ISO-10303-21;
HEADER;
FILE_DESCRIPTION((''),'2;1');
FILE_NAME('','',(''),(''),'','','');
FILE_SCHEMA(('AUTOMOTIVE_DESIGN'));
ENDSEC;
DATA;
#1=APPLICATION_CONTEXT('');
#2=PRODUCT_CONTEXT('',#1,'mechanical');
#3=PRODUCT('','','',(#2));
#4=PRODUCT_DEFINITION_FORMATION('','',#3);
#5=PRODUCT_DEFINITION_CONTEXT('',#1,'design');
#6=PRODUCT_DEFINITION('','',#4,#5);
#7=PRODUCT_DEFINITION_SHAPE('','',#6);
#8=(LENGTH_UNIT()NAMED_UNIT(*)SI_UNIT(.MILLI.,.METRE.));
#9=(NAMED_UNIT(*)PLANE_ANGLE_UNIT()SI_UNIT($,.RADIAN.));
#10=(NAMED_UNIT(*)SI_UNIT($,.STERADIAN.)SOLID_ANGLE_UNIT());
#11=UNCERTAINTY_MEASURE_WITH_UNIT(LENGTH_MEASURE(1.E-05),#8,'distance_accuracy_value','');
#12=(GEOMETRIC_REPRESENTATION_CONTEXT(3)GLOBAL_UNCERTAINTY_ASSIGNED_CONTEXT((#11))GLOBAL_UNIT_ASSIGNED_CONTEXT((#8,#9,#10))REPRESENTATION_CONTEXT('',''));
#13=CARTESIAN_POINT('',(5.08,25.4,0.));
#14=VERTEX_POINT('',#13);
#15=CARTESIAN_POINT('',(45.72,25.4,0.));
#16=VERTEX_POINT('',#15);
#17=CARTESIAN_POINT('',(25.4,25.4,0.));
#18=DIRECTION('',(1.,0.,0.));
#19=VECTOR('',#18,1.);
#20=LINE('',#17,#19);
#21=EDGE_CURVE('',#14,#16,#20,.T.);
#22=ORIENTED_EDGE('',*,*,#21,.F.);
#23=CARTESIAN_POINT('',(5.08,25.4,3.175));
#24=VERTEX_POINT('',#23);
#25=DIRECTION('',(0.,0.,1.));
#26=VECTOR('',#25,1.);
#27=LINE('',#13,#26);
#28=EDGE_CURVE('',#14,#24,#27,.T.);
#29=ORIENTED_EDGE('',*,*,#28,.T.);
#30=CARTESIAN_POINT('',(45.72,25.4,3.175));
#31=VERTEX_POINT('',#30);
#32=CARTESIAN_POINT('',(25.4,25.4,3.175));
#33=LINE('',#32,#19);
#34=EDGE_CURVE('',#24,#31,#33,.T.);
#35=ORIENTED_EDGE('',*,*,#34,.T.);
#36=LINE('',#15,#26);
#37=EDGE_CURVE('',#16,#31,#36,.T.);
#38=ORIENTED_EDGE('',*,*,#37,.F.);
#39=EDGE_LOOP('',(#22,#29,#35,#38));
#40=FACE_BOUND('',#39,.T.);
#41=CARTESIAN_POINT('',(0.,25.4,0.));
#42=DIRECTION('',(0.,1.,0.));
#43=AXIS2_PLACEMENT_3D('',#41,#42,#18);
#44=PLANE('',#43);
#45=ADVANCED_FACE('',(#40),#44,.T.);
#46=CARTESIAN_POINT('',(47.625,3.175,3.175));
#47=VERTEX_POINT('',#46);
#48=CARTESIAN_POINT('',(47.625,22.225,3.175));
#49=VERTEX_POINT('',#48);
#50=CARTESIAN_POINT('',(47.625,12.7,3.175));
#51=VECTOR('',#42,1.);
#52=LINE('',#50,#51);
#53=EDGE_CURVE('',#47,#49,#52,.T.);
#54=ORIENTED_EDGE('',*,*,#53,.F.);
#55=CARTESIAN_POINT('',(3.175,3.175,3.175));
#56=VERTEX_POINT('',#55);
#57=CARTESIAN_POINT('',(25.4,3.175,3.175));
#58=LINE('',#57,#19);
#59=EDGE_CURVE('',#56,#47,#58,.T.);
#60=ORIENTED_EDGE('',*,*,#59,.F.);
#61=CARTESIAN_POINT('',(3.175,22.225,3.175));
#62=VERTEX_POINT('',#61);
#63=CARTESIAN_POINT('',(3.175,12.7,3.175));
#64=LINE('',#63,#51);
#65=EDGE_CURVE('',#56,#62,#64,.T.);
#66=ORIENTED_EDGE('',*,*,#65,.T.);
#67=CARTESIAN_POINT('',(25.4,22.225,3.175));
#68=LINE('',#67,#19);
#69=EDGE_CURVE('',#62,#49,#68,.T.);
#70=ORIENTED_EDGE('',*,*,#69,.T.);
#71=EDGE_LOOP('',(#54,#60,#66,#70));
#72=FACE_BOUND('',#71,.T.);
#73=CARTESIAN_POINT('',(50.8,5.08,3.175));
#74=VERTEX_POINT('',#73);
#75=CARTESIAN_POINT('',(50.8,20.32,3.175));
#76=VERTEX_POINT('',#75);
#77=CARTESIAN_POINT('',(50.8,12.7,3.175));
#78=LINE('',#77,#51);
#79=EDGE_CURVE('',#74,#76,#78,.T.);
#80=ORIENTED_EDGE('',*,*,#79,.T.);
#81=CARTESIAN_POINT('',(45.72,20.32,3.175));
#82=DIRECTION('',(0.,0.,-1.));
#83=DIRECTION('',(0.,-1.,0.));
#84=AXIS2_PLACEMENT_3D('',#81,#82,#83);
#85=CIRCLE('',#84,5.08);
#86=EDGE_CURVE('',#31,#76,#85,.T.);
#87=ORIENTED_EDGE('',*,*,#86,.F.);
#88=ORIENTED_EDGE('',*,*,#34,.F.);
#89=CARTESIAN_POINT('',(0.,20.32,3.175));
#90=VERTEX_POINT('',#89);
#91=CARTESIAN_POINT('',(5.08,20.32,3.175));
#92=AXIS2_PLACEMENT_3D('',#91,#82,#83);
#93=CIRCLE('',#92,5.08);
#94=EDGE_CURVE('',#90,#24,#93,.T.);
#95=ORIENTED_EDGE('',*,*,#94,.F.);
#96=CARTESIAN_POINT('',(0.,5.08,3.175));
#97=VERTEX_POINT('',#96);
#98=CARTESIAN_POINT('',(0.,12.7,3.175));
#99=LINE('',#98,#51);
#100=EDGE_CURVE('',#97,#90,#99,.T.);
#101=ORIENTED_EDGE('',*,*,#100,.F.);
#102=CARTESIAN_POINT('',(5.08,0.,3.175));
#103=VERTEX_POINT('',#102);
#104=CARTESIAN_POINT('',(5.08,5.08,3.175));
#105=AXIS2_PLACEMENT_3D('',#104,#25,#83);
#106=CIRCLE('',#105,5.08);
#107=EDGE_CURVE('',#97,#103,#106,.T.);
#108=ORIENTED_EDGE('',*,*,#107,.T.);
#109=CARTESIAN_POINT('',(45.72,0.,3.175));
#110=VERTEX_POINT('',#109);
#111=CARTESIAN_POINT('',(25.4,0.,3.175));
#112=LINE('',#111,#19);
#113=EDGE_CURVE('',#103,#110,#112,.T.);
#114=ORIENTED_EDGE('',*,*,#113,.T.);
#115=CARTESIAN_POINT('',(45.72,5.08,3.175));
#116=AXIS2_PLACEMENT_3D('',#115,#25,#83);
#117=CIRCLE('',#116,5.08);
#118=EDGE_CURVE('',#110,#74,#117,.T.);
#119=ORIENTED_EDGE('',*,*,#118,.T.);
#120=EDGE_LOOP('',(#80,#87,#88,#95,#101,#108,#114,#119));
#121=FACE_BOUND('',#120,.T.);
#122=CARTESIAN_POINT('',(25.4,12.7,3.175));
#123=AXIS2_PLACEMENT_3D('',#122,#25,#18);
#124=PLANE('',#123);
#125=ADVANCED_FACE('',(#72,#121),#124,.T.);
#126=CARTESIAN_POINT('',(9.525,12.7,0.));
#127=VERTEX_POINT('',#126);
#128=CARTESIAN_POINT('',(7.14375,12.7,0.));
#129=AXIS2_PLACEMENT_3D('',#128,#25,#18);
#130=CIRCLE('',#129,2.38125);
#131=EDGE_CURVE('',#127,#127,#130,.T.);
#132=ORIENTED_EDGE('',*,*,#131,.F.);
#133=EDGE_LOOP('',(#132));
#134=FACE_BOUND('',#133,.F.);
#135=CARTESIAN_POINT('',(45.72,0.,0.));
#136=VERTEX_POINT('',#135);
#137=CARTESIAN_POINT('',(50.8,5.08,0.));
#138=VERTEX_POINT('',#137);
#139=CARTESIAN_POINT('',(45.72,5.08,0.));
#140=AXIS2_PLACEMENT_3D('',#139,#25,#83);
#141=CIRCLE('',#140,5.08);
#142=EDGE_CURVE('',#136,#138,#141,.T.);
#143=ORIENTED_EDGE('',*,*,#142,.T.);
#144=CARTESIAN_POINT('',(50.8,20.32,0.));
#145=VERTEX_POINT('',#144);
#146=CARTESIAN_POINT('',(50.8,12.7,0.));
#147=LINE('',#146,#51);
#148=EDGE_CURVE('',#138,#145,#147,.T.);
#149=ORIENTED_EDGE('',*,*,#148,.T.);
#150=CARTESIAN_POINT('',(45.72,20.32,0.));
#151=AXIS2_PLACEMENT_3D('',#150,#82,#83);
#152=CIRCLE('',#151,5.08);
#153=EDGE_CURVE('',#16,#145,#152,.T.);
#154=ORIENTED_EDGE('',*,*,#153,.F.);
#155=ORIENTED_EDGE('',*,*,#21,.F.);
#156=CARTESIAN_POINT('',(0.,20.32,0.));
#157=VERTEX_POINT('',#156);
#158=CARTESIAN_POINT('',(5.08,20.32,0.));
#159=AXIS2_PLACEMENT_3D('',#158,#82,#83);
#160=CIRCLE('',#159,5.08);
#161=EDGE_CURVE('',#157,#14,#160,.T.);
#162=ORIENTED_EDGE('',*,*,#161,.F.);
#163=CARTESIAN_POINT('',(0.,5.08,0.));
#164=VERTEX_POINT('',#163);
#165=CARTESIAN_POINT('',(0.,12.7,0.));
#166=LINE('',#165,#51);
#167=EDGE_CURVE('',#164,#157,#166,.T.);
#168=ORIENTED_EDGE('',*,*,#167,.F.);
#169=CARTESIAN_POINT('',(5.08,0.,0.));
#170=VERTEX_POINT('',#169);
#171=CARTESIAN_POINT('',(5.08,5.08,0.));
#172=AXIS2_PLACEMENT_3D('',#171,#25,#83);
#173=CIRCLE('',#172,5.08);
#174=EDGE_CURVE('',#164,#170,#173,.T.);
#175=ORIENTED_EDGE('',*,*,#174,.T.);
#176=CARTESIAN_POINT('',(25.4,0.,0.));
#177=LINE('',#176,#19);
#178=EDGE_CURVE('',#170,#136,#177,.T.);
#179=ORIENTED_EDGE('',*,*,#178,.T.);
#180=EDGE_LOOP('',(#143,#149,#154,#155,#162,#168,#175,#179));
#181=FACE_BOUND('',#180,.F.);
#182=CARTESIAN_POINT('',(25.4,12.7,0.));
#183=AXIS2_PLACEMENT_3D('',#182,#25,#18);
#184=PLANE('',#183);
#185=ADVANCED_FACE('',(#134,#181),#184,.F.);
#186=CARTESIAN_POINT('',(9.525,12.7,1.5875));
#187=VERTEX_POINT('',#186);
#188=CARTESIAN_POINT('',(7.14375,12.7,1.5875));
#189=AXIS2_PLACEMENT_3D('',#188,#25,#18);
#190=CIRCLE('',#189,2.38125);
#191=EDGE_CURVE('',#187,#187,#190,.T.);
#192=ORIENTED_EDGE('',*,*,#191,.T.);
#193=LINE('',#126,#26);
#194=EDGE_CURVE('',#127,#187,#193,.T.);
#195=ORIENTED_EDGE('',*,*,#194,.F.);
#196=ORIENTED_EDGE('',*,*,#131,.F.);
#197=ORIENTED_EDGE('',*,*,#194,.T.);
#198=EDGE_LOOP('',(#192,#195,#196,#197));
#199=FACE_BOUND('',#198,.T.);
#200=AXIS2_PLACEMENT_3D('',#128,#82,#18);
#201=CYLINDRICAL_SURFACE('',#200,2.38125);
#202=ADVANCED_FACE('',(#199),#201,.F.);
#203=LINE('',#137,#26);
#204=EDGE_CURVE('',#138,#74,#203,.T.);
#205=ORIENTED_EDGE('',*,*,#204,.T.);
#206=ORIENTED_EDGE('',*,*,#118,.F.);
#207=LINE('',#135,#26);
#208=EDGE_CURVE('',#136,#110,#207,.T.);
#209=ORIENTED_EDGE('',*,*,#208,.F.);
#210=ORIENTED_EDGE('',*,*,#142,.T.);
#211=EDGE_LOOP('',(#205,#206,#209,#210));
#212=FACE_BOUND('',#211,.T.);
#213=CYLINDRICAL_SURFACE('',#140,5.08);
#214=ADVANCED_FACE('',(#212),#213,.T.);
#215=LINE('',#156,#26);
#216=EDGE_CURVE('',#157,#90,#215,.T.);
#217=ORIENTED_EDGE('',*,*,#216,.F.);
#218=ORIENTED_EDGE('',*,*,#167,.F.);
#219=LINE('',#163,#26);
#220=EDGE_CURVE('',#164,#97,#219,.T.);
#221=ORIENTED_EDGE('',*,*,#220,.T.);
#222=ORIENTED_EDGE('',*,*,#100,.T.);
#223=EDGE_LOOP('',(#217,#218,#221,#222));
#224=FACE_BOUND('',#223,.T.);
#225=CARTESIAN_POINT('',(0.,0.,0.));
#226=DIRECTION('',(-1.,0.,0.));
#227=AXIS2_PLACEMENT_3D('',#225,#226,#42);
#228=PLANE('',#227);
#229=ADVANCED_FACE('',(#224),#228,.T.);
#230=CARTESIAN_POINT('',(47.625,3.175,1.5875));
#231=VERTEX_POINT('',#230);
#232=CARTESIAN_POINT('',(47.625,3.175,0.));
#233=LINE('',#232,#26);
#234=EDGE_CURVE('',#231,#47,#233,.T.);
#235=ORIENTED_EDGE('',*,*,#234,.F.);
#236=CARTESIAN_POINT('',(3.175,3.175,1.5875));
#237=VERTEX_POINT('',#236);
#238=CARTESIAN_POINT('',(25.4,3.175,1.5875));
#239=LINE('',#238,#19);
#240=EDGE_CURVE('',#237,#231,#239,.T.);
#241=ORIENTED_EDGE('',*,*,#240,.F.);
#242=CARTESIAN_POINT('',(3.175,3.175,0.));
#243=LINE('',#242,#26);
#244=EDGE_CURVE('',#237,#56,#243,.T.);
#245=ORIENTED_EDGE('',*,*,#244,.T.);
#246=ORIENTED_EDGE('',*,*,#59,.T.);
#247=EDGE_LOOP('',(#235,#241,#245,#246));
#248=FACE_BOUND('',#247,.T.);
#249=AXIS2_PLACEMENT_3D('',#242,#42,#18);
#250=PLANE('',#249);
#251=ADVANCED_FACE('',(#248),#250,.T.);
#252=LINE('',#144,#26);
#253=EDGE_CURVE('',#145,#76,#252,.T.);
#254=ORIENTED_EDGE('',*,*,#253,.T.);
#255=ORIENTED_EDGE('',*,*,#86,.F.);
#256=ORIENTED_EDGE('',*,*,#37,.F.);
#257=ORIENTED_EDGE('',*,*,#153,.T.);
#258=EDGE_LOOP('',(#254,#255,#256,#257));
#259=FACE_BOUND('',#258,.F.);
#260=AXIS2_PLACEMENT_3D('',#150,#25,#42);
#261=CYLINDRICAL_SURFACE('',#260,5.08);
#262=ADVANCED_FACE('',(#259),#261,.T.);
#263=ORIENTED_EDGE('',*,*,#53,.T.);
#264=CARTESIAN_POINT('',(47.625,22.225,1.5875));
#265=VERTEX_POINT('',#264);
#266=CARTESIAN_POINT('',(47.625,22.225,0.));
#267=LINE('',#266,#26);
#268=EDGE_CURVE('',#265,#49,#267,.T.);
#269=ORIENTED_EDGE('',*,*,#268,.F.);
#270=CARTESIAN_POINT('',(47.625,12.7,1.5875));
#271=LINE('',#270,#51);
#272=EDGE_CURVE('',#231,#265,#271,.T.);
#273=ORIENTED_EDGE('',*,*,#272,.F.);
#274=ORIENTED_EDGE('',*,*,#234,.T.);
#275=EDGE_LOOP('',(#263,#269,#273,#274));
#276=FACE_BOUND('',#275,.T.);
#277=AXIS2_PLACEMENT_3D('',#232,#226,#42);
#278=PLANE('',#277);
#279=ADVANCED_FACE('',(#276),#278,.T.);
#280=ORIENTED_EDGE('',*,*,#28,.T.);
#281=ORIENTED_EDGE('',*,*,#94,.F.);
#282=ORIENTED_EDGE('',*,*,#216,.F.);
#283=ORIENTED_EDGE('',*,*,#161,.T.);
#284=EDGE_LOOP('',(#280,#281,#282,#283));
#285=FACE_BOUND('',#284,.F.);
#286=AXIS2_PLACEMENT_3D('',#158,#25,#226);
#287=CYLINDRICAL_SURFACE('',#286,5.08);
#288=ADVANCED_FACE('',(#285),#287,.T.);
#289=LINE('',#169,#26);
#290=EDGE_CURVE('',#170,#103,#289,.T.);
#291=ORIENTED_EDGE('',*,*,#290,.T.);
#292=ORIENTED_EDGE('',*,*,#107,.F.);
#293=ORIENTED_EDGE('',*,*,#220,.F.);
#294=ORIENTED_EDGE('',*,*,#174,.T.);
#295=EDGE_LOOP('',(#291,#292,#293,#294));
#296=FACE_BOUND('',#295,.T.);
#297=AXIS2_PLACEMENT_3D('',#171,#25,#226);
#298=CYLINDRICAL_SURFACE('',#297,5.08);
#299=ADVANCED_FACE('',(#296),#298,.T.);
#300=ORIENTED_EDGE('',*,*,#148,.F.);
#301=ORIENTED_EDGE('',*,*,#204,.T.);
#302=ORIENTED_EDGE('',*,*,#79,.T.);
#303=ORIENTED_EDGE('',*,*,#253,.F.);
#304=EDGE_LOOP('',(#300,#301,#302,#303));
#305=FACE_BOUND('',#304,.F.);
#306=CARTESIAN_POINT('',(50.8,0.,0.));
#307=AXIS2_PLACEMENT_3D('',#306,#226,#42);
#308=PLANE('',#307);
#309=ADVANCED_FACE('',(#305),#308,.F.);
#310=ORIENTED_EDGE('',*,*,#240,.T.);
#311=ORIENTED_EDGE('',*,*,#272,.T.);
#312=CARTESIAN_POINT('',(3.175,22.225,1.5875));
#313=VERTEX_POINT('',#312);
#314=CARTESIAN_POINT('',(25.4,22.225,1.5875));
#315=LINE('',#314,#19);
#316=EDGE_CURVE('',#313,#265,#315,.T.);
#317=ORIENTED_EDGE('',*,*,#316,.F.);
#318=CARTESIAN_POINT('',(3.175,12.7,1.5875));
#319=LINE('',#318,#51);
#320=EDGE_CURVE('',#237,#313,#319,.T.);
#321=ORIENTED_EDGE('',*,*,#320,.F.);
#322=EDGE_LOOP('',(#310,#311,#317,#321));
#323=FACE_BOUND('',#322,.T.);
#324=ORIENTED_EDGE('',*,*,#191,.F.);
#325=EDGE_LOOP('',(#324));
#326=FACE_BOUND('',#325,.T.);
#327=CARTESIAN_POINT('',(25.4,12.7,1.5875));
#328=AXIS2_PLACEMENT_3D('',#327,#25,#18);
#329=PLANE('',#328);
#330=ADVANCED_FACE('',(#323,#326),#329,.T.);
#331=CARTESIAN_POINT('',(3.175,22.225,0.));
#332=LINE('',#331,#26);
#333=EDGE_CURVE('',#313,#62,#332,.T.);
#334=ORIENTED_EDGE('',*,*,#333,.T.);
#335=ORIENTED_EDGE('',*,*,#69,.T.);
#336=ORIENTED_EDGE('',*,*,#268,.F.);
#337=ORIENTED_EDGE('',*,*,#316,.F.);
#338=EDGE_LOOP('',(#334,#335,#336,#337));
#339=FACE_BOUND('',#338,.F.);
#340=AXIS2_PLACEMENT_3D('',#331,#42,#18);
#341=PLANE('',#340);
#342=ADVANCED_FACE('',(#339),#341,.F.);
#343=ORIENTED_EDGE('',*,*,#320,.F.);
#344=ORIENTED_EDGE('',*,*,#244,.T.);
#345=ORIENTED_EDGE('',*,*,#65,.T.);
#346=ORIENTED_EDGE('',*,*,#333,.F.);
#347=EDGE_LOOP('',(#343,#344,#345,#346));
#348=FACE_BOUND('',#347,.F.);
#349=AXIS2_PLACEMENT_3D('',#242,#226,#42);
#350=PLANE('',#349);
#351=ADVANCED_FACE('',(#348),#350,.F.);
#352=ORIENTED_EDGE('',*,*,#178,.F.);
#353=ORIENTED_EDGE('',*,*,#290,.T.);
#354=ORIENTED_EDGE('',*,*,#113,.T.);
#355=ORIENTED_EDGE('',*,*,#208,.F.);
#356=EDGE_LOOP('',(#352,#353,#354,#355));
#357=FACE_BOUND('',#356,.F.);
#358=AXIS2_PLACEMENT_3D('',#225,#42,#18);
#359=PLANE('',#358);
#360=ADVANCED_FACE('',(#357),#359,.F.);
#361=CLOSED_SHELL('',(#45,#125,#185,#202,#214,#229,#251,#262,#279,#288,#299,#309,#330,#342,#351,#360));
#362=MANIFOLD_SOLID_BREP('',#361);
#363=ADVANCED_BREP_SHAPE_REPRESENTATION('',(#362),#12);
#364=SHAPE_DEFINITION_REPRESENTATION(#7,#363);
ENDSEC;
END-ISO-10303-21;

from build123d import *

# Parameters (mm, degrees)
F0_W     = 44.45
F0_H     = 19.05
F0_R     = 2.38125
F1_DEPTH = 1.5875
F0_W_2   = 50.8
F0_H_2   = 25.4
F2_DEPTH = 3.175
F3_R     = 5.08


# Not quite as in the source:
# - a length typed as a fraction of an inch, garbled in the dataset ("3 / 203.2 mm" for 3/8 in), is restored


with BuildPart() as f1:
    # F0 (on Top) → F1 (new body)
    with BuildSketch(Plane.XY):
        with Locations((25.4, 12.7)):
            Rectangle(F0_W, F0_H)
        with Locations((7.14375, 12.7)):
            Circle(F0_R, mode=Mode.SUBTRACT)
    extrude(amount=F1_DEPTH)

    # F0 (on Top) → F2 (join)
    with BuildSketch(Plane.XY):
        with Locations((25.4, 12.7)):
            Rectangle(F0_W_2, F0_H_2)
        with Locations((25.4, 12.7)):
            Rectangle(F0_W, F0_H, mode=Mode.SUBTRACT)
    extrude(amount=F2_DEPTH)

    # F3
    f3_edges = [f1.edges().sort_by_distance(p)[0] for p in [
        (50.8, 0, 1.5875),
        (50.8, 25.4, 1.5875),
        (0, 0, 1.5875),
        (0, 25.4, 1.5875),
    ]]
    fillet(f3_edges, radius=F3_R)


solid = f1.part
